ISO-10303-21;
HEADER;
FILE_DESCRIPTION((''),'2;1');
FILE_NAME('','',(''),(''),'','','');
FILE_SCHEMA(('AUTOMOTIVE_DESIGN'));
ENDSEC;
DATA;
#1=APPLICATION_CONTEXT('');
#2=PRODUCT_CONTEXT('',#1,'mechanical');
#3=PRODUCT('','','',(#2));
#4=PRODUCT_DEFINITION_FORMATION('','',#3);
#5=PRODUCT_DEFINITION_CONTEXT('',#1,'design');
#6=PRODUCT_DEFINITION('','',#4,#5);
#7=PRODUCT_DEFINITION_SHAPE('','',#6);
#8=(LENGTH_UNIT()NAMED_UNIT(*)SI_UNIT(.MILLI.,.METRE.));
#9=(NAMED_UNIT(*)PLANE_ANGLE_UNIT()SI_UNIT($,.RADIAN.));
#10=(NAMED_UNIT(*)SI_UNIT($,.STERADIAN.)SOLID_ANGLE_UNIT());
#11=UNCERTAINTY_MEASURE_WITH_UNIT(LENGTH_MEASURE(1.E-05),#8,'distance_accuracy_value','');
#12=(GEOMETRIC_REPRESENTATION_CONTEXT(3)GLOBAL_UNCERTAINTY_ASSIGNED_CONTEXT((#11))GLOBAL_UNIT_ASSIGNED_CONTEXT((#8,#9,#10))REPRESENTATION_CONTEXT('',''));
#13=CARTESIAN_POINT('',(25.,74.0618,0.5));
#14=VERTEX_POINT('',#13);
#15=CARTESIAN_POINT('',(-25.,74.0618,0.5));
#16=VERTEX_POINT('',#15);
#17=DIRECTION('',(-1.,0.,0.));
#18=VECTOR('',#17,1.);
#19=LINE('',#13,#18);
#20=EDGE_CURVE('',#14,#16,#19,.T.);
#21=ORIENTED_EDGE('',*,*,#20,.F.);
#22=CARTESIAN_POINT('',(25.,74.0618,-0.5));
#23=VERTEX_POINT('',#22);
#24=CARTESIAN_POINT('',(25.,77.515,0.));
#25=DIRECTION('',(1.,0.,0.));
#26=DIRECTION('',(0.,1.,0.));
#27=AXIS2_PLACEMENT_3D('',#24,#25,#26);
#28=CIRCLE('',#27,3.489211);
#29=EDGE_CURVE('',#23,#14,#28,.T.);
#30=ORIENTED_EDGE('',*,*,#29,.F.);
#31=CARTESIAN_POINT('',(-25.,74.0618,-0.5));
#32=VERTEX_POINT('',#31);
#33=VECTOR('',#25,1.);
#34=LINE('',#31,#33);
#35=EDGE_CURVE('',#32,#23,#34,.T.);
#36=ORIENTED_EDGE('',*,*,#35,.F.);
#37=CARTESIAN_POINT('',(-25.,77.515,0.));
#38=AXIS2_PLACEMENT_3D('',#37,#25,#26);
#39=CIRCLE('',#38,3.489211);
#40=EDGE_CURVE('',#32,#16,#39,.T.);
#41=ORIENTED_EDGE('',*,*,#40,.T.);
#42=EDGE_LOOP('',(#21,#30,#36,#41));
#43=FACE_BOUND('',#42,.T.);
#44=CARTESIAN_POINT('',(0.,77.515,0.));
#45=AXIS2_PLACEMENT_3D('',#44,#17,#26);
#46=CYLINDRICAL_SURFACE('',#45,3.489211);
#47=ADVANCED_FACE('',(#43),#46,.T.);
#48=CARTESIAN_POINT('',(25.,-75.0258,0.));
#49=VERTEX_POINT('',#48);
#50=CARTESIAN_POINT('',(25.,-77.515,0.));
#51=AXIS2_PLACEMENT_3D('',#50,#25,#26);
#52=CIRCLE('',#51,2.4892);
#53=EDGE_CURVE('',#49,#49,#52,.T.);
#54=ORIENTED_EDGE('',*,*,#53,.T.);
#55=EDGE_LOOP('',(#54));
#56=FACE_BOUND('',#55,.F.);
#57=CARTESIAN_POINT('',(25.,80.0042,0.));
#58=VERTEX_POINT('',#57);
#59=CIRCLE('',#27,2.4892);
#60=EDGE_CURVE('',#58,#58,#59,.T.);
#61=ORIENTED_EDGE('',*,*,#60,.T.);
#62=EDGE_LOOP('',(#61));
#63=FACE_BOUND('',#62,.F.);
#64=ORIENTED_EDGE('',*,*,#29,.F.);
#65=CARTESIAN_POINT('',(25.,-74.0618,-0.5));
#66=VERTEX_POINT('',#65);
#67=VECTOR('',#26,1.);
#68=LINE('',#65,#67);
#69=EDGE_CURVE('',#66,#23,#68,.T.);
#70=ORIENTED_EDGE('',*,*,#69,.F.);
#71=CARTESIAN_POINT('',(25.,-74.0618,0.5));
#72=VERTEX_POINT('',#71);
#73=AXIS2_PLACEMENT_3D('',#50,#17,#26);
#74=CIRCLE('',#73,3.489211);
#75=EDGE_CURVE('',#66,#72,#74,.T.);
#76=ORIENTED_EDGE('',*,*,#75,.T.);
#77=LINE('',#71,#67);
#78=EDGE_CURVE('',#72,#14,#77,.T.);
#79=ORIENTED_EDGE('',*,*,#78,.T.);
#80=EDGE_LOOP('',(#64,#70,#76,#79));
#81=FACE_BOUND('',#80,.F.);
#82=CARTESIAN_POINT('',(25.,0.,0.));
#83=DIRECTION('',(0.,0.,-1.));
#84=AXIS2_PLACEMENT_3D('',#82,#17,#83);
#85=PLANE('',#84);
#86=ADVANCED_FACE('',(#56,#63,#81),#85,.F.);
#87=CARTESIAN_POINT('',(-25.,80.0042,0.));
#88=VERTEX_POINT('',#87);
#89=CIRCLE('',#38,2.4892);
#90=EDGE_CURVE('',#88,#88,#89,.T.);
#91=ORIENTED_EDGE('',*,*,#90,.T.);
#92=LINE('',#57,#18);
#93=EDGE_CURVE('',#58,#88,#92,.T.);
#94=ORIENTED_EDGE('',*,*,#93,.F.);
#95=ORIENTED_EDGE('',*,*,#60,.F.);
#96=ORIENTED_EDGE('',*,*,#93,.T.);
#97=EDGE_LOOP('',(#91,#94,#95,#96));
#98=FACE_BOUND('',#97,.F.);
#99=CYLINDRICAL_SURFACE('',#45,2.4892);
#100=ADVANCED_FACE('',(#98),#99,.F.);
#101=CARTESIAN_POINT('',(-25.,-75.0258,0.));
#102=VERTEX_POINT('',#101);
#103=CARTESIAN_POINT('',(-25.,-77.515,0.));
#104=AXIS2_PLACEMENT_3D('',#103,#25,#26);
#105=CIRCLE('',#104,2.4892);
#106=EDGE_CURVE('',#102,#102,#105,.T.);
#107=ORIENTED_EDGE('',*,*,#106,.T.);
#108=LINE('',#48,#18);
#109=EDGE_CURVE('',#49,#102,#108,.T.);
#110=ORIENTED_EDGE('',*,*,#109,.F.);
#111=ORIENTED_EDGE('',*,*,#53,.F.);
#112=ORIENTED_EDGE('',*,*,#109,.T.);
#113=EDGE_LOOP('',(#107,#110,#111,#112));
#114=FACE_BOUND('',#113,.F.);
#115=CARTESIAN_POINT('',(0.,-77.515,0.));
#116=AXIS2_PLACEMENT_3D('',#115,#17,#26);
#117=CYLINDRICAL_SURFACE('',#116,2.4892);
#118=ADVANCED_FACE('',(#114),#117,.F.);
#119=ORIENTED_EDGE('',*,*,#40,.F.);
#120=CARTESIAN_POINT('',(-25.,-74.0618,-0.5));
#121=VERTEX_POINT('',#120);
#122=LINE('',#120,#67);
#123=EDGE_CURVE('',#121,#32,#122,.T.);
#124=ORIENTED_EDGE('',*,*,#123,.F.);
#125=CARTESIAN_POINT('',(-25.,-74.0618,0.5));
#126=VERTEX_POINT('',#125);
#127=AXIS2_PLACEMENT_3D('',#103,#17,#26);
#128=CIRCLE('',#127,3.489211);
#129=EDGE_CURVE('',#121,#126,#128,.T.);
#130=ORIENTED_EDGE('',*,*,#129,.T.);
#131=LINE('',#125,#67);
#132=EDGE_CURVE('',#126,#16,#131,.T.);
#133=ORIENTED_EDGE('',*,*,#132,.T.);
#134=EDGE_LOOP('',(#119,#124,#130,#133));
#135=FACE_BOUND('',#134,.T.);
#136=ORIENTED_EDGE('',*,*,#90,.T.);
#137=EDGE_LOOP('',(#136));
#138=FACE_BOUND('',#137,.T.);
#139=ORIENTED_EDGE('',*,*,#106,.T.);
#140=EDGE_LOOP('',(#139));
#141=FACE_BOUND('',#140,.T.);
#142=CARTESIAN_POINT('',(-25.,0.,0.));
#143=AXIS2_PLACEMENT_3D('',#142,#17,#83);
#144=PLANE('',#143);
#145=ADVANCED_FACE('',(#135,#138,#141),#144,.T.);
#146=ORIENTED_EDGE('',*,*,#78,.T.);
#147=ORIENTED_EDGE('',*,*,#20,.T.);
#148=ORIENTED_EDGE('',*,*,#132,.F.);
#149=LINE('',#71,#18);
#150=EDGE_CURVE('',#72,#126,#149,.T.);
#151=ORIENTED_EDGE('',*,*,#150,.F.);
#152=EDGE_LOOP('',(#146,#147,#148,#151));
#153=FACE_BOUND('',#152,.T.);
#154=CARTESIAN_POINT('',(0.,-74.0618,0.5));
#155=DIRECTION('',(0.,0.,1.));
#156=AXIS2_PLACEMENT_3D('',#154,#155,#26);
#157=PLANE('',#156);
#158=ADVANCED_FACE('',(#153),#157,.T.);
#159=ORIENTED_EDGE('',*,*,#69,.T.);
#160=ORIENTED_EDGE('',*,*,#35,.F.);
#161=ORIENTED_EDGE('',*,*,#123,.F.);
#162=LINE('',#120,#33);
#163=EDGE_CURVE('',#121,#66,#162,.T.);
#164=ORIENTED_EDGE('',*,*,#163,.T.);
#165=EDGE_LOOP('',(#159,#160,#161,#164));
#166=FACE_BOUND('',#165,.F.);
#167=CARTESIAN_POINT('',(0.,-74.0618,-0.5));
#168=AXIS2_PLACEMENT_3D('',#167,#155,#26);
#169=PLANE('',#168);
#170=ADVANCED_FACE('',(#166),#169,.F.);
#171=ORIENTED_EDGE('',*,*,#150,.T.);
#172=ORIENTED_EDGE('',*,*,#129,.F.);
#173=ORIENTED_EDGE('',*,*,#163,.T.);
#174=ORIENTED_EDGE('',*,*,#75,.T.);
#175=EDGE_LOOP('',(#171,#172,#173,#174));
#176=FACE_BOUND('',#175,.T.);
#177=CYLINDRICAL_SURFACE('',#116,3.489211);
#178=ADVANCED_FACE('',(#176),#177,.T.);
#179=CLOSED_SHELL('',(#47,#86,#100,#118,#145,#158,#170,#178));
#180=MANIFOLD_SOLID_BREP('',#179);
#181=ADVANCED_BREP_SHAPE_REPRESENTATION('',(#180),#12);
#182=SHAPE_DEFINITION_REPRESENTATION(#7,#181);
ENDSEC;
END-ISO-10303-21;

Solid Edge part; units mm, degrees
sketch "Sketch1" plane through (0, 0, 0) normal (1, 0, 0) x (0, 1, 0)
  circle A0 centre (-77.515, 0) radius 2.4892
  arc A1 (-74.0618, -0.5) -> (-74.0618, 0.5) centre (-77.515, 0) cw
  line L0 (-74.0618, -0.5) -> (74.0618, -0.5)
  arc A2 (74.0618, -0.5) -> (74.0618, 0.5) centre (77.515, 0) ccw
  line L1 (-74.0618, 0.5) -> (74.0618, 0.5)
  circle A3 centre (77.515, 0) radius 2.4892
extrude "Protrusion1" add sketch "Sketch1" along normal mid plane 50
properties material "Nylon, general purpose"
